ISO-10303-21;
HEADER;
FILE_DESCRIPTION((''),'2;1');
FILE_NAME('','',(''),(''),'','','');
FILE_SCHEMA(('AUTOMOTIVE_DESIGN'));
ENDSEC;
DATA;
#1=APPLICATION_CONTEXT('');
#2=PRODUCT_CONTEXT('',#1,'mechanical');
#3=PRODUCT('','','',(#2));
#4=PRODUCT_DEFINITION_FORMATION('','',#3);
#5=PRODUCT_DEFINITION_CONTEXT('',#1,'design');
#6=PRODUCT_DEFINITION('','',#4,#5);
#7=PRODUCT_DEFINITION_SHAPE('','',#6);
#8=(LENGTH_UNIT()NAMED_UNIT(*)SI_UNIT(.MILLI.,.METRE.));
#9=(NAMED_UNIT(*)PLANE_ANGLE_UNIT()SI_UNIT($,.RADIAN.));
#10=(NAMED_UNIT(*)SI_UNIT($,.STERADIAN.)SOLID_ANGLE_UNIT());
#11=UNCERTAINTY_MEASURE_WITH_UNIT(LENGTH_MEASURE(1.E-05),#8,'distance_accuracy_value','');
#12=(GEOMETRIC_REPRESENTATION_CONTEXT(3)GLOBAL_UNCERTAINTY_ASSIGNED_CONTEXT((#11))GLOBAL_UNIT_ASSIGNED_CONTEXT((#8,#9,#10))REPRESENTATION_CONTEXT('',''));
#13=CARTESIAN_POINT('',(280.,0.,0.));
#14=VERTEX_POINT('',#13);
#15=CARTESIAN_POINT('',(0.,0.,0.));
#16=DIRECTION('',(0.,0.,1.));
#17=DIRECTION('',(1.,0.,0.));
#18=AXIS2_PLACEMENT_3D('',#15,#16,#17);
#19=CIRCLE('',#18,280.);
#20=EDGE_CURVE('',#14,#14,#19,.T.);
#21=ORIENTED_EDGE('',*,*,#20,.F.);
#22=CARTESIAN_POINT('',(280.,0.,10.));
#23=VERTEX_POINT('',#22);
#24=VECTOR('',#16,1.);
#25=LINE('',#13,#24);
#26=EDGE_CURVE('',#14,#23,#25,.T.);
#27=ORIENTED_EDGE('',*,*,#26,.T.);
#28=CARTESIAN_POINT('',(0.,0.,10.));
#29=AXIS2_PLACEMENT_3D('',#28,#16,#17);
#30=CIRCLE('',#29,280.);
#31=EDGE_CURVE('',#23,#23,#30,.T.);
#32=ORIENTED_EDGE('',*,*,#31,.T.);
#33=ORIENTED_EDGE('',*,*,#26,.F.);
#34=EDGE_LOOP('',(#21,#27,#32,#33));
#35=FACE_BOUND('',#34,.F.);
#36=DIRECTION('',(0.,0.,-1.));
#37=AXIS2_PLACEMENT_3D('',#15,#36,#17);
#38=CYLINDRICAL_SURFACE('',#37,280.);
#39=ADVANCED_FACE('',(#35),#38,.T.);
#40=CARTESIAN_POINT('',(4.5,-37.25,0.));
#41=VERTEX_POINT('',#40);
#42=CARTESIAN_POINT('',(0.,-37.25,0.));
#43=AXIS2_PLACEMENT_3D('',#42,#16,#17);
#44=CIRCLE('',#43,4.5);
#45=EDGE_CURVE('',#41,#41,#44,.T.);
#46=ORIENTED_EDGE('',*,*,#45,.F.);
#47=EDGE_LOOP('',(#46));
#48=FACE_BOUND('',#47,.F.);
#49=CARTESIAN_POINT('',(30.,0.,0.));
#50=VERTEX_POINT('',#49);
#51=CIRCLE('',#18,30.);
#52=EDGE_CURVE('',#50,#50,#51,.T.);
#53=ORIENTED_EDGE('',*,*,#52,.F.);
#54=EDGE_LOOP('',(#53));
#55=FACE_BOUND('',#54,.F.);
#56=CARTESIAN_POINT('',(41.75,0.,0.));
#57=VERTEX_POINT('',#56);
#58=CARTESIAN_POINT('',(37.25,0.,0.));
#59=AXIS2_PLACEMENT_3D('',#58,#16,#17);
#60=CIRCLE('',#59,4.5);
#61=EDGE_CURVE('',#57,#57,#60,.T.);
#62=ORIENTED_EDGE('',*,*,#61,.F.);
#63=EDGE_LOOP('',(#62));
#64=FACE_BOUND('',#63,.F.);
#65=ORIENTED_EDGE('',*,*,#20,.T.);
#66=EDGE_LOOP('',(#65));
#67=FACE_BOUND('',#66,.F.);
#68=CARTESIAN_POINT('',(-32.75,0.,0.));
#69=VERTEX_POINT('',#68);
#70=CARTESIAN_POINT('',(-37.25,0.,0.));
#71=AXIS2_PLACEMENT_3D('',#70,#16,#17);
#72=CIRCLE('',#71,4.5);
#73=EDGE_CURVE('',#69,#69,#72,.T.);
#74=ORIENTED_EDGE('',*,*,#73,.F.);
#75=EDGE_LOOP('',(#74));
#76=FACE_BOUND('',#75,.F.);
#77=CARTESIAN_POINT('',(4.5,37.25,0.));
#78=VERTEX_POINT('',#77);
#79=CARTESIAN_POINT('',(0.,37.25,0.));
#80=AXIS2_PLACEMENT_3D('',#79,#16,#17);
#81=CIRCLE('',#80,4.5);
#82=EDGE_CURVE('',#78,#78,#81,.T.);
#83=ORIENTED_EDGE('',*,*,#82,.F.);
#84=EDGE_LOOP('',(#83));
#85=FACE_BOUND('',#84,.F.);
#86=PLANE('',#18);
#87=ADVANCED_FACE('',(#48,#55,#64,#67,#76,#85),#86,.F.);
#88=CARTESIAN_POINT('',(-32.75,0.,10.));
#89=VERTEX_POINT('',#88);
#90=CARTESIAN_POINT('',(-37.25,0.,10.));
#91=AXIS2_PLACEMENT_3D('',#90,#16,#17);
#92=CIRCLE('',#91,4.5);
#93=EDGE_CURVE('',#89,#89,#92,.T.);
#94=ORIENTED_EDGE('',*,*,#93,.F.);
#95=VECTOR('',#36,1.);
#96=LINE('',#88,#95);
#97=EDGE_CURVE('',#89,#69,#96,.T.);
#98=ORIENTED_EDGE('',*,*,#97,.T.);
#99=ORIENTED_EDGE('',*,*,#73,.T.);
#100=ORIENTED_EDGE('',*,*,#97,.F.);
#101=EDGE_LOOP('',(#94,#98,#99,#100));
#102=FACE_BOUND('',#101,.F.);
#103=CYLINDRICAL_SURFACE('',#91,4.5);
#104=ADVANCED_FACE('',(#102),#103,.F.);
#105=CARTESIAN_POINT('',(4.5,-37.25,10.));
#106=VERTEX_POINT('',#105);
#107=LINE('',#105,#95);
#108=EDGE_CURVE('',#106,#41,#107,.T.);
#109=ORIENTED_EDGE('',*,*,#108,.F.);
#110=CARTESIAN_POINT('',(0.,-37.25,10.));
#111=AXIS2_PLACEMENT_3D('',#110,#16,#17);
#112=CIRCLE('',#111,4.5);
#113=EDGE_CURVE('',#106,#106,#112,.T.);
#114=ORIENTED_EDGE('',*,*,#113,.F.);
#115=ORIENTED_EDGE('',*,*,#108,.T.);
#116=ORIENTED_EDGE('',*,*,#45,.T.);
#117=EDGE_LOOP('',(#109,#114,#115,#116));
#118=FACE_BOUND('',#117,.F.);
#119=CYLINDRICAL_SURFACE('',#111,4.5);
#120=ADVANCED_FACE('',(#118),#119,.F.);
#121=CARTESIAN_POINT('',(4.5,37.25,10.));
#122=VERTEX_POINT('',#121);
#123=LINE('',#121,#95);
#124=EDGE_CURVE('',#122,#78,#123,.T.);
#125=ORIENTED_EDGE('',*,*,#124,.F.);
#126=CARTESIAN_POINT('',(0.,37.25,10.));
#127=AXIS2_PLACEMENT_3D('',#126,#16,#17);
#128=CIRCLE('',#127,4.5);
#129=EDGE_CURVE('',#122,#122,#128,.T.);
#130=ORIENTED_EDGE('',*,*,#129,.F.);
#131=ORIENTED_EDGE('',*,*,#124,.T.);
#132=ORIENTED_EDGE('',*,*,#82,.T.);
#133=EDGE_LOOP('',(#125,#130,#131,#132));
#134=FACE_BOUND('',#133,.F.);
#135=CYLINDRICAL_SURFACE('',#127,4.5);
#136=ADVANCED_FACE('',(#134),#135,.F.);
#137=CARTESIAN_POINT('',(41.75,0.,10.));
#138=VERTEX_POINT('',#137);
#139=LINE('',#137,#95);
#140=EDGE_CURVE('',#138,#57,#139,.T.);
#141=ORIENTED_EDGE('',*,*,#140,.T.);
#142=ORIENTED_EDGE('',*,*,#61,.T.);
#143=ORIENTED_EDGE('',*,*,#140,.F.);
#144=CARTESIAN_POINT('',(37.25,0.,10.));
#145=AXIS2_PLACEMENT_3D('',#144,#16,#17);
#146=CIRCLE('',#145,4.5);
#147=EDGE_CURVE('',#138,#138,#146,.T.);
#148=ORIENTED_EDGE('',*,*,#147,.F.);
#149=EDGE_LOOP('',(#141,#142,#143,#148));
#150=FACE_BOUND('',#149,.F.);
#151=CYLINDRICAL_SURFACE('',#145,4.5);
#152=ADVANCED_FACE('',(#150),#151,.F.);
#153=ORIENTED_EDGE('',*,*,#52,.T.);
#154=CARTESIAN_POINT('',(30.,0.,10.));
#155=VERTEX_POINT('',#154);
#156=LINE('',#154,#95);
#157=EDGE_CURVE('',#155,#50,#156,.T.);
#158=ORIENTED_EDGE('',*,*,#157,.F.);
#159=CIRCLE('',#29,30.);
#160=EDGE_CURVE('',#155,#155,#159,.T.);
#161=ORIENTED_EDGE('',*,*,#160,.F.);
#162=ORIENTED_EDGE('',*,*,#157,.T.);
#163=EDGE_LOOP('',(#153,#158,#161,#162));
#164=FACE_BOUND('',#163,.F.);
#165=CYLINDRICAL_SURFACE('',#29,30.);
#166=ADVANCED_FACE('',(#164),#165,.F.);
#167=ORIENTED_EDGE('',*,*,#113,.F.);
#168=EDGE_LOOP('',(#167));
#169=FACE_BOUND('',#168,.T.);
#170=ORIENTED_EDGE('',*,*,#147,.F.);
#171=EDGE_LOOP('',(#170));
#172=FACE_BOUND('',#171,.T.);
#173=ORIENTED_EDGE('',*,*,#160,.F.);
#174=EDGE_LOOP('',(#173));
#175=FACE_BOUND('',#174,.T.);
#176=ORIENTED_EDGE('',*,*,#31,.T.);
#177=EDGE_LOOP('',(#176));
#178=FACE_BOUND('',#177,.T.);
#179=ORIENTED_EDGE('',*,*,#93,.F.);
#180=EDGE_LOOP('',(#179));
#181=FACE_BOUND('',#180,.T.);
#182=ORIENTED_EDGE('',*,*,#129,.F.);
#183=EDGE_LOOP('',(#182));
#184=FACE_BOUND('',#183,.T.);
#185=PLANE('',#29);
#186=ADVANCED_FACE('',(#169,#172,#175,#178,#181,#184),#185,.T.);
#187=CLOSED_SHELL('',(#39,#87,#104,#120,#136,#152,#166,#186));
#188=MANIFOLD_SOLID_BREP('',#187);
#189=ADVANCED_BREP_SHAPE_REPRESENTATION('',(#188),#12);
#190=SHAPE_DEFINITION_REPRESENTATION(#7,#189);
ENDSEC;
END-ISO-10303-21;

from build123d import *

# Parameters (mm, degrees)
F0_R     = 280
F1_DEPTH = 10
F2_R     = 30
F2_R_2   = 4.5
F3_DEPTH = 25


# Not quite as in the source:
# - a feature names something its author has since deleted; it is built from what else it names


with BuildPart() as f1:
    # F0 (on Top) → F1 (new body)
    with BuildSketch(Plane.XY):
        Circle(F0_R)
    extrude(amount=F1_DEPTH)

    # F2 (on face) → F3 (cut)
    with BuildSketch(Plane.XY.offset(10)):
        Circle(F2_R)
        with Locations((-37.25, 0)):
            Circle(F2_R_2)
        with Locations((0, 37.25)):
            Circle(F2_R_2)
        with Locations((37.25, 0)):
            Circle(F2_R_2)
        with Locations((0, -37.25)):
            Circle(F2_R_2)
    extrude(amount=-F3_DEPTH, mode=Mode.SUBTRACT)


solid = f1.part
